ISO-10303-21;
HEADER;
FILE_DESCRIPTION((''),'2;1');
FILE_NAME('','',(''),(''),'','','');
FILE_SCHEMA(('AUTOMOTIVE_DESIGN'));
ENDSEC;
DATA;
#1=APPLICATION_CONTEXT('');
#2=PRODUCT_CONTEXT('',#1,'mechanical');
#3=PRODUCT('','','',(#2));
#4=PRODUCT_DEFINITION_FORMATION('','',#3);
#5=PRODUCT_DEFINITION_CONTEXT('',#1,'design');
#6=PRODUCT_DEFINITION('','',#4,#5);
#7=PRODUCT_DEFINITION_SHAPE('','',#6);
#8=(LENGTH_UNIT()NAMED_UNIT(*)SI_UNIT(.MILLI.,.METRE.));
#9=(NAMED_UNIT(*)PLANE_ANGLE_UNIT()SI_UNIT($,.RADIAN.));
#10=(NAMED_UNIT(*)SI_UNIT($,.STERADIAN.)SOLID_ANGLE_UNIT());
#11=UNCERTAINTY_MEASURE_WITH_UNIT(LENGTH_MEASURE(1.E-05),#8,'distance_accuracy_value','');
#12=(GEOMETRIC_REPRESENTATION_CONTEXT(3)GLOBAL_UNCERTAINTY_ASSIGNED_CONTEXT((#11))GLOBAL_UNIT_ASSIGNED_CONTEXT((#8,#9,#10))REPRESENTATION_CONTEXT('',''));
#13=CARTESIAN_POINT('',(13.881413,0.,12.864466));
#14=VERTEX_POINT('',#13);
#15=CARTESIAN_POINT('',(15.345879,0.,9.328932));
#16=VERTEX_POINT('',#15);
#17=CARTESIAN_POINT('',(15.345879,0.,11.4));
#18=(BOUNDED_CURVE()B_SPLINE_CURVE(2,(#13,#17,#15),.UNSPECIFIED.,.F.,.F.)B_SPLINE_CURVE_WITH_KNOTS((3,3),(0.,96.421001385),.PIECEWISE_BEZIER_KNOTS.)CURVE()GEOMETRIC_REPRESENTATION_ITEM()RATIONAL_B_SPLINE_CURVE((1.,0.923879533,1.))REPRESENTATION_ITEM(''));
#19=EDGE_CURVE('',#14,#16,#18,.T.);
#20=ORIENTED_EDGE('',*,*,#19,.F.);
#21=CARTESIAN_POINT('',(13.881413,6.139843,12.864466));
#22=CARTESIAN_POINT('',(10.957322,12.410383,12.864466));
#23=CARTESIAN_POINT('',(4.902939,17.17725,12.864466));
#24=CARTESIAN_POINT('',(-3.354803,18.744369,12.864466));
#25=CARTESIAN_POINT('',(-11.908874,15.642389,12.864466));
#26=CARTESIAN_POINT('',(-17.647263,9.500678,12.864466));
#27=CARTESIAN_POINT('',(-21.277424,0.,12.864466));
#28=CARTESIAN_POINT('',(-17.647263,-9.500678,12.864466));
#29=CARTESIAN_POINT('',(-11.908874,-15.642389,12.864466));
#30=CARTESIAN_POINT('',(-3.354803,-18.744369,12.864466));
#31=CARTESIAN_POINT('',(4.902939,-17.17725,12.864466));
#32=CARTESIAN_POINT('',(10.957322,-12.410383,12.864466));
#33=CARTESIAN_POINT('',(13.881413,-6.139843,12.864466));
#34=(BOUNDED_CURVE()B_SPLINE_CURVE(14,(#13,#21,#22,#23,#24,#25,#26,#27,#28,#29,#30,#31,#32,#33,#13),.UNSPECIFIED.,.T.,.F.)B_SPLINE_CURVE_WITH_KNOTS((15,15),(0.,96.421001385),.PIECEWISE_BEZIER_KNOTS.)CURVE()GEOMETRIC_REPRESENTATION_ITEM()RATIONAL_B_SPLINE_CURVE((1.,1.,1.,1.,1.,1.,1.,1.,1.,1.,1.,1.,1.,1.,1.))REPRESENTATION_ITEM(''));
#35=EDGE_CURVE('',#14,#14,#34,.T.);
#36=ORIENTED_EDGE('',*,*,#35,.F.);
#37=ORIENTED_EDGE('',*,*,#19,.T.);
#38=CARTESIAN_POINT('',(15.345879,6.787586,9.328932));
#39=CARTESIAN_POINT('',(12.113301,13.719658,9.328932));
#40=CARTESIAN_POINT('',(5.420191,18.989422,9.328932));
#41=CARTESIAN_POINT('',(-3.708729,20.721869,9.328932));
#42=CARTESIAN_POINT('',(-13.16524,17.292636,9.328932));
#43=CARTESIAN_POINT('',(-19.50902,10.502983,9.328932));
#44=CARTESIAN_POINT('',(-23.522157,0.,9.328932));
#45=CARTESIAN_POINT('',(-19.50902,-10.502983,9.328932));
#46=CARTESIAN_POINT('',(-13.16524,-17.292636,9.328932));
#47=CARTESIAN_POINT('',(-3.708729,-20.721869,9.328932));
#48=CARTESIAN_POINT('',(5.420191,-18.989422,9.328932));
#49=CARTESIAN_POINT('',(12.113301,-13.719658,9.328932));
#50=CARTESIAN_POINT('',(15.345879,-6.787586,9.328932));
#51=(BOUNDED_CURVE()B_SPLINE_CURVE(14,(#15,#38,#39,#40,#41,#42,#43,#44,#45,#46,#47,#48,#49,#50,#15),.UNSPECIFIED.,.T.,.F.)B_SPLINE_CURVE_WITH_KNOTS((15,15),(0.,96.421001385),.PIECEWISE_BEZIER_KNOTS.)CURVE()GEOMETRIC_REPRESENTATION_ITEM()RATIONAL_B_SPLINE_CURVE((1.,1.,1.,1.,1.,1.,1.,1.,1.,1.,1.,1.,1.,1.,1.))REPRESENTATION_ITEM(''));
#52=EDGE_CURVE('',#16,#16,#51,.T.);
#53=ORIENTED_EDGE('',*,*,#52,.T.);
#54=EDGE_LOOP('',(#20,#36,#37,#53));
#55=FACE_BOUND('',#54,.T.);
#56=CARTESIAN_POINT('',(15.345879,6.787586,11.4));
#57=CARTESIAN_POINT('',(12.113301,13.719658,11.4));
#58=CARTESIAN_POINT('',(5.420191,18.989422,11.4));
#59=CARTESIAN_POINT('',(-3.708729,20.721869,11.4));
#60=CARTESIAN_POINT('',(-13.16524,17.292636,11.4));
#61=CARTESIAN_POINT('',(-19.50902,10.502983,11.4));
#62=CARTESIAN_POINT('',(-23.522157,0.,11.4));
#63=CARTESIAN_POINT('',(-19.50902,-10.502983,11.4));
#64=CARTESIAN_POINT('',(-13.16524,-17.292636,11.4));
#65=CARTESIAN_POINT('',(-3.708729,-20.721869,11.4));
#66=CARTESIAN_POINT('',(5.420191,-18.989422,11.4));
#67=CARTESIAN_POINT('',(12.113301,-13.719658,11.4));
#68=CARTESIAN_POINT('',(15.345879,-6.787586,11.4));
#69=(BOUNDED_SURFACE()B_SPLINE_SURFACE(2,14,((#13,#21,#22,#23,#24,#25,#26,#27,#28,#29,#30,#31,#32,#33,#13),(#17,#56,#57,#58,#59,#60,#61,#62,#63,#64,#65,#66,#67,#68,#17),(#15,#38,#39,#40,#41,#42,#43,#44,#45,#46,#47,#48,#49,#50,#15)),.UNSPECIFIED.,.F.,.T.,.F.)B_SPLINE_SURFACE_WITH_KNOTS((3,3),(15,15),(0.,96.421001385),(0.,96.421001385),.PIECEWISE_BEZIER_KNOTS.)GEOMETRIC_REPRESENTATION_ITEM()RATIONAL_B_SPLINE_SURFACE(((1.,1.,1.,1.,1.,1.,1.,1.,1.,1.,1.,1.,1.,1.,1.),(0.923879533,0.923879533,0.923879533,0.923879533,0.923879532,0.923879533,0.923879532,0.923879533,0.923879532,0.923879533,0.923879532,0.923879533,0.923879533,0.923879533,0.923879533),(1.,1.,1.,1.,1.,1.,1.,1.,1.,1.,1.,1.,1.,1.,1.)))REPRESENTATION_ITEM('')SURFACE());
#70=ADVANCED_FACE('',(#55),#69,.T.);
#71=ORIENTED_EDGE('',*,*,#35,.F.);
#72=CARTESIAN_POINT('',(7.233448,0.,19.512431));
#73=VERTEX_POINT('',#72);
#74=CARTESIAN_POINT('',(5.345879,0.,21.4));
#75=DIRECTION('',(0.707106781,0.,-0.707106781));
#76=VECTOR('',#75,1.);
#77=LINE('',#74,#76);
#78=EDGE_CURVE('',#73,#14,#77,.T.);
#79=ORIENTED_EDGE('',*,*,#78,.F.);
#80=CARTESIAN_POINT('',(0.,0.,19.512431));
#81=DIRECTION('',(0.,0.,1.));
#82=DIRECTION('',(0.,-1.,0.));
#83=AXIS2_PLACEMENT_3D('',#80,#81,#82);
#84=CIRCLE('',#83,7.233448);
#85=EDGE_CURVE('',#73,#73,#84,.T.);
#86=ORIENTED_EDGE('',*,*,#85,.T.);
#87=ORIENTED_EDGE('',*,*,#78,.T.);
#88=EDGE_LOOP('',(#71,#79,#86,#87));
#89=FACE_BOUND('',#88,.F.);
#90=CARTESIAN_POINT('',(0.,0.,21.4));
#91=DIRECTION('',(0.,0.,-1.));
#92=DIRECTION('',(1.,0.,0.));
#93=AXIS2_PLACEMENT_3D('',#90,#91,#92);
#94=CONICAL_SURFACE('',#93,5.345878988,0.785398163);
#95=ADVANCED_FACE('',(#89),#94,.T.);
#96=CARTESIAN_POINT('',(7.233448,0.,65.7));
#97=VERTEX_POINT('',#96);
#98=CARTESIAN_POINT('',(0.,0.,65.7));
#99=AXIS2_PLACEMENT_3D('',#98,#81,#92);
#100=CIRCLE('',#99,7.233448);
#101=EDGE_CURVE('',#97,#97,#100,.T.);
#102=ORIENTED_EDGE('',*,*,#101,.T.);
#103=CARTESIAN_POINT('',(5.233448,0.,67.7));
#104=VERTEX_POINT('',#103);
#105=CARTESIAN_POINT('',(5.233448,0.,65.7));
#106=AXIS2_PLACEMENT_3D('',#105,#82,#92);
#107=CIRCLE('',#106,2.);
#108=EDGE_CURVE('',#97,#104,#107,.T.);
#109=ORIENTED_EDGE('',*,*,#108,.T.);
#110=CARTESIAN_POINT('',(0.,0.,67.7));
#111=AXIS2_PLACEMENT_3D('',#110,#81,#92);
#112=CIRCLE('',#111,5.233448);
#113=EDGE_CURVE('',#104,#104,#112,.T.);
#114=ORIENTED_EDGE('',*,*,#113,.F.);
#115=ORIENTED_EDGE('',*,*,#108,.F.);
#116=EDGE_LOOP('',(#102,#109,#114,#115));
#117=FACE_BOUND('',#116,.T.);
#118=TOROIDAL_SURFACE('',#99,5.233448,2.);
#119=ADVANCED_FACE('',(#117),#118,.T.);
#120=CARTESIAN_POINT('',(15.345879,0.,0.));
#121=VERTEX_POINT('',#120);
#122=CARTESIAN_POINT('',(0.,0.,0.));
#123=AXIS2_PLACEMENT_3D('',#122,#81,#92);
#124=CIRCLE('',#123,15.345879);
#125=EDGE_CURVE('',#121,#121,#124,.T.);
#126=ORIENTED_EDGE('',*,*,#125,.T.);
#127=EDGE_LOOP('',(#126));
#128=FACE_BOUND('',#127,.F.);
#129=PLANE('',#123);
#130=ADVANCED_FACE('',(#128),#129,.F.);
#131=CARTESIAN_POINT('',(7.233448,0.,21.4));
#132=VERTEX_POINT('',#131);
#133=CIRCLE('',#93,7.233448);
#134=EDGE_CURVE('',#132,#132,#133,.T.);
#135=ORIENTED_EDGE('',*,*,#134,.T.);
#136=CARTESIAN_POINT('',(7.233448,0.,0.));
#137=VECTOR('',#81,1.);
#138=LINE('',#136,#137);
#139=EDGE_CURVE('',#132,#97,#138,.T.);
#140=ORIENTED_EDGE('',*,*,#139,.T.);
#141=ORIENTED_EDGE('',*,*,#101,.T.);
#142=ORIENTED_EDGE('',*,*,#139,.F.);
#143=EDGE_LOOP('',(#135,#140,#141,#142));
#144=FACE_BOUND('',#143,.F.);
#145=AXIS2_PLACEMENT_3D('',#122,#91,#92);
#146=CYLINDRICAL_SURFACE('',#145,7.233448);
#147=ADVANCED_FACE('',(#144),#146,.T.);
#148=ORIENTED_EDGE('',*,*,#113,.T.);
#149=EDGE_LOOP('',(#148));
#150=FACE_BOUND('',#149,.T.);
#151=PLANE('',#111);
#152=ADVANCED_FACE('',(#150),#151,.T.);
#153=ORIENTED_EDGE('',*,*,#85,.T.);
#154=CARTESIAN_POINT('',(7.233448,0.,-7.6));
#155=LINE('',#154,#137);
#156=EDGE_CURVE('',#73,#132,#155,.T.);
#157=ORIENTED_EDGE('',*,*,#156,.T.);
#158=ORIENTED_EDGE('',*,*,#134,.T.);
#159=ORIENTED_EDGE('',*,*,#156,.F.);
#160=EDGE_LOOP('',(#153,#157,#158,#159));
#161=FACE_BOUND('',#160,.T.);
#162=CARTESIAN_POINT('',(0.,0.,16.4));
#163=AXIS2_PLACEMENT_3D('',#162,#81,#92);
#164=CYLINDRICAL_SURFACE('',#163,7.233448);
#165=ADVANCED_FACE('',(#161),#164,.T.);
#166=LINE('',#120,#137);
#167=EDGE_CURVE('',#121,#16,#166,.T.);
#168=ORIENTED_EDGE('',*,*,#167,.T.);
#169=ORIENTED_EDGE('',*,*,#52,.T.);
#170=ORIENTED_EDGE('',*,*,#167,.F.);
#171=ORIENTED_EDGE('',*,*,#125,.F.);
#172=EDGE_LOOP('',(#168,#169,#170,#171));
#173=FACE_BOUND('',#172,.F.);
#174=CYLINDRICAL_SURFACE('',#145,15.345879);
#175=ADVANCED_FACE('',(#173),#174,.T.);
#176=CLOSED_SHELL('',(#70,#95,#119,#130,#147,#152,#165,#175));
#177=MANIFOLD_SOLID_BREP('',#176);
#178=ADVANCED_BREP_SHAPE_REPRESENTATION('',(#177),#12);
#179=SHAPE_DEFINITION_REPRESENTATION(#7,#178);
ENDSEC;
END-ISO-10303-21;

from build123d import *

# Parameters (mm, degrees)
F0_R        = 7.2334484139
F1_DEPTH    = 67.7
F2_R        = 15.3458789883
F3_DEPTH    = 21.4
F4_R        = 2
F5_S5_R     = 7.2334484139
F5_T6_DEPTH = 24
F6_R        = 5


# Not quite as in the source:
# - a fillet or chamfer that OpenCascade refuses, or shapes differently, is made with other operations: its cross-section is extruded or revolved along the edge and cut away or added


with BuildPart() as f1:
    # F0 (on Top) → F1 (new body)
    with BuildSketch(Plane.XY):
        Circle(F0_R)
    extrude(amount=F1_DEPTH)

    # F2 (on Top) → F3 (join)
    with BuildSketch(Plane.XY):
        Circle(F2_R)
    extrude(amount=F3_DEPTH)

    # F4
    f4_edges = [f1.edges().sort_by_distance(p)[0] for p in [
        (-7.233448, 0, 67.7),
    ]]
    fillet(f4_edges, radius=F4_R)

    # F5: chamfer of 10 on 1 edges, made by hand


with BuildPart() as f5_tool2:
    # F5_s3 → F5_t4 (revolve)
    with BuildSketch(Plane.XZ):
        Polygon((5.3458789883, 21.4), (15.3458789883, 11.4), (15.3458789883, 21.4), align=None)
    revolve(axis=Axis((0, 0, 21.4), (0, 0, 1)))

    # F5_s5 → F5_t6 (cut, symmetric)
    with BuildSketch(Plane.XY.offset(16.4)):
        Circle(F5_S5_R)
    extrude(amount=F5_T6_DEPTH, both=True, mode=Mode.SUBTRACT)


with BuildPart() as f1_1:
    add(f1.part)

    # F5_t1: cut F5_tool2
    add(f5_tool2.part, mode=Mode.SUBTRACT)

    # F6
    f6_edges = [f1_1.edges().sort_by_distance(p)[0] for p in [
        (-15.345879, 0, 11.4),
    ]]
    fillet(f6_edges, radius=F6_R)


solid = f1_1.part
